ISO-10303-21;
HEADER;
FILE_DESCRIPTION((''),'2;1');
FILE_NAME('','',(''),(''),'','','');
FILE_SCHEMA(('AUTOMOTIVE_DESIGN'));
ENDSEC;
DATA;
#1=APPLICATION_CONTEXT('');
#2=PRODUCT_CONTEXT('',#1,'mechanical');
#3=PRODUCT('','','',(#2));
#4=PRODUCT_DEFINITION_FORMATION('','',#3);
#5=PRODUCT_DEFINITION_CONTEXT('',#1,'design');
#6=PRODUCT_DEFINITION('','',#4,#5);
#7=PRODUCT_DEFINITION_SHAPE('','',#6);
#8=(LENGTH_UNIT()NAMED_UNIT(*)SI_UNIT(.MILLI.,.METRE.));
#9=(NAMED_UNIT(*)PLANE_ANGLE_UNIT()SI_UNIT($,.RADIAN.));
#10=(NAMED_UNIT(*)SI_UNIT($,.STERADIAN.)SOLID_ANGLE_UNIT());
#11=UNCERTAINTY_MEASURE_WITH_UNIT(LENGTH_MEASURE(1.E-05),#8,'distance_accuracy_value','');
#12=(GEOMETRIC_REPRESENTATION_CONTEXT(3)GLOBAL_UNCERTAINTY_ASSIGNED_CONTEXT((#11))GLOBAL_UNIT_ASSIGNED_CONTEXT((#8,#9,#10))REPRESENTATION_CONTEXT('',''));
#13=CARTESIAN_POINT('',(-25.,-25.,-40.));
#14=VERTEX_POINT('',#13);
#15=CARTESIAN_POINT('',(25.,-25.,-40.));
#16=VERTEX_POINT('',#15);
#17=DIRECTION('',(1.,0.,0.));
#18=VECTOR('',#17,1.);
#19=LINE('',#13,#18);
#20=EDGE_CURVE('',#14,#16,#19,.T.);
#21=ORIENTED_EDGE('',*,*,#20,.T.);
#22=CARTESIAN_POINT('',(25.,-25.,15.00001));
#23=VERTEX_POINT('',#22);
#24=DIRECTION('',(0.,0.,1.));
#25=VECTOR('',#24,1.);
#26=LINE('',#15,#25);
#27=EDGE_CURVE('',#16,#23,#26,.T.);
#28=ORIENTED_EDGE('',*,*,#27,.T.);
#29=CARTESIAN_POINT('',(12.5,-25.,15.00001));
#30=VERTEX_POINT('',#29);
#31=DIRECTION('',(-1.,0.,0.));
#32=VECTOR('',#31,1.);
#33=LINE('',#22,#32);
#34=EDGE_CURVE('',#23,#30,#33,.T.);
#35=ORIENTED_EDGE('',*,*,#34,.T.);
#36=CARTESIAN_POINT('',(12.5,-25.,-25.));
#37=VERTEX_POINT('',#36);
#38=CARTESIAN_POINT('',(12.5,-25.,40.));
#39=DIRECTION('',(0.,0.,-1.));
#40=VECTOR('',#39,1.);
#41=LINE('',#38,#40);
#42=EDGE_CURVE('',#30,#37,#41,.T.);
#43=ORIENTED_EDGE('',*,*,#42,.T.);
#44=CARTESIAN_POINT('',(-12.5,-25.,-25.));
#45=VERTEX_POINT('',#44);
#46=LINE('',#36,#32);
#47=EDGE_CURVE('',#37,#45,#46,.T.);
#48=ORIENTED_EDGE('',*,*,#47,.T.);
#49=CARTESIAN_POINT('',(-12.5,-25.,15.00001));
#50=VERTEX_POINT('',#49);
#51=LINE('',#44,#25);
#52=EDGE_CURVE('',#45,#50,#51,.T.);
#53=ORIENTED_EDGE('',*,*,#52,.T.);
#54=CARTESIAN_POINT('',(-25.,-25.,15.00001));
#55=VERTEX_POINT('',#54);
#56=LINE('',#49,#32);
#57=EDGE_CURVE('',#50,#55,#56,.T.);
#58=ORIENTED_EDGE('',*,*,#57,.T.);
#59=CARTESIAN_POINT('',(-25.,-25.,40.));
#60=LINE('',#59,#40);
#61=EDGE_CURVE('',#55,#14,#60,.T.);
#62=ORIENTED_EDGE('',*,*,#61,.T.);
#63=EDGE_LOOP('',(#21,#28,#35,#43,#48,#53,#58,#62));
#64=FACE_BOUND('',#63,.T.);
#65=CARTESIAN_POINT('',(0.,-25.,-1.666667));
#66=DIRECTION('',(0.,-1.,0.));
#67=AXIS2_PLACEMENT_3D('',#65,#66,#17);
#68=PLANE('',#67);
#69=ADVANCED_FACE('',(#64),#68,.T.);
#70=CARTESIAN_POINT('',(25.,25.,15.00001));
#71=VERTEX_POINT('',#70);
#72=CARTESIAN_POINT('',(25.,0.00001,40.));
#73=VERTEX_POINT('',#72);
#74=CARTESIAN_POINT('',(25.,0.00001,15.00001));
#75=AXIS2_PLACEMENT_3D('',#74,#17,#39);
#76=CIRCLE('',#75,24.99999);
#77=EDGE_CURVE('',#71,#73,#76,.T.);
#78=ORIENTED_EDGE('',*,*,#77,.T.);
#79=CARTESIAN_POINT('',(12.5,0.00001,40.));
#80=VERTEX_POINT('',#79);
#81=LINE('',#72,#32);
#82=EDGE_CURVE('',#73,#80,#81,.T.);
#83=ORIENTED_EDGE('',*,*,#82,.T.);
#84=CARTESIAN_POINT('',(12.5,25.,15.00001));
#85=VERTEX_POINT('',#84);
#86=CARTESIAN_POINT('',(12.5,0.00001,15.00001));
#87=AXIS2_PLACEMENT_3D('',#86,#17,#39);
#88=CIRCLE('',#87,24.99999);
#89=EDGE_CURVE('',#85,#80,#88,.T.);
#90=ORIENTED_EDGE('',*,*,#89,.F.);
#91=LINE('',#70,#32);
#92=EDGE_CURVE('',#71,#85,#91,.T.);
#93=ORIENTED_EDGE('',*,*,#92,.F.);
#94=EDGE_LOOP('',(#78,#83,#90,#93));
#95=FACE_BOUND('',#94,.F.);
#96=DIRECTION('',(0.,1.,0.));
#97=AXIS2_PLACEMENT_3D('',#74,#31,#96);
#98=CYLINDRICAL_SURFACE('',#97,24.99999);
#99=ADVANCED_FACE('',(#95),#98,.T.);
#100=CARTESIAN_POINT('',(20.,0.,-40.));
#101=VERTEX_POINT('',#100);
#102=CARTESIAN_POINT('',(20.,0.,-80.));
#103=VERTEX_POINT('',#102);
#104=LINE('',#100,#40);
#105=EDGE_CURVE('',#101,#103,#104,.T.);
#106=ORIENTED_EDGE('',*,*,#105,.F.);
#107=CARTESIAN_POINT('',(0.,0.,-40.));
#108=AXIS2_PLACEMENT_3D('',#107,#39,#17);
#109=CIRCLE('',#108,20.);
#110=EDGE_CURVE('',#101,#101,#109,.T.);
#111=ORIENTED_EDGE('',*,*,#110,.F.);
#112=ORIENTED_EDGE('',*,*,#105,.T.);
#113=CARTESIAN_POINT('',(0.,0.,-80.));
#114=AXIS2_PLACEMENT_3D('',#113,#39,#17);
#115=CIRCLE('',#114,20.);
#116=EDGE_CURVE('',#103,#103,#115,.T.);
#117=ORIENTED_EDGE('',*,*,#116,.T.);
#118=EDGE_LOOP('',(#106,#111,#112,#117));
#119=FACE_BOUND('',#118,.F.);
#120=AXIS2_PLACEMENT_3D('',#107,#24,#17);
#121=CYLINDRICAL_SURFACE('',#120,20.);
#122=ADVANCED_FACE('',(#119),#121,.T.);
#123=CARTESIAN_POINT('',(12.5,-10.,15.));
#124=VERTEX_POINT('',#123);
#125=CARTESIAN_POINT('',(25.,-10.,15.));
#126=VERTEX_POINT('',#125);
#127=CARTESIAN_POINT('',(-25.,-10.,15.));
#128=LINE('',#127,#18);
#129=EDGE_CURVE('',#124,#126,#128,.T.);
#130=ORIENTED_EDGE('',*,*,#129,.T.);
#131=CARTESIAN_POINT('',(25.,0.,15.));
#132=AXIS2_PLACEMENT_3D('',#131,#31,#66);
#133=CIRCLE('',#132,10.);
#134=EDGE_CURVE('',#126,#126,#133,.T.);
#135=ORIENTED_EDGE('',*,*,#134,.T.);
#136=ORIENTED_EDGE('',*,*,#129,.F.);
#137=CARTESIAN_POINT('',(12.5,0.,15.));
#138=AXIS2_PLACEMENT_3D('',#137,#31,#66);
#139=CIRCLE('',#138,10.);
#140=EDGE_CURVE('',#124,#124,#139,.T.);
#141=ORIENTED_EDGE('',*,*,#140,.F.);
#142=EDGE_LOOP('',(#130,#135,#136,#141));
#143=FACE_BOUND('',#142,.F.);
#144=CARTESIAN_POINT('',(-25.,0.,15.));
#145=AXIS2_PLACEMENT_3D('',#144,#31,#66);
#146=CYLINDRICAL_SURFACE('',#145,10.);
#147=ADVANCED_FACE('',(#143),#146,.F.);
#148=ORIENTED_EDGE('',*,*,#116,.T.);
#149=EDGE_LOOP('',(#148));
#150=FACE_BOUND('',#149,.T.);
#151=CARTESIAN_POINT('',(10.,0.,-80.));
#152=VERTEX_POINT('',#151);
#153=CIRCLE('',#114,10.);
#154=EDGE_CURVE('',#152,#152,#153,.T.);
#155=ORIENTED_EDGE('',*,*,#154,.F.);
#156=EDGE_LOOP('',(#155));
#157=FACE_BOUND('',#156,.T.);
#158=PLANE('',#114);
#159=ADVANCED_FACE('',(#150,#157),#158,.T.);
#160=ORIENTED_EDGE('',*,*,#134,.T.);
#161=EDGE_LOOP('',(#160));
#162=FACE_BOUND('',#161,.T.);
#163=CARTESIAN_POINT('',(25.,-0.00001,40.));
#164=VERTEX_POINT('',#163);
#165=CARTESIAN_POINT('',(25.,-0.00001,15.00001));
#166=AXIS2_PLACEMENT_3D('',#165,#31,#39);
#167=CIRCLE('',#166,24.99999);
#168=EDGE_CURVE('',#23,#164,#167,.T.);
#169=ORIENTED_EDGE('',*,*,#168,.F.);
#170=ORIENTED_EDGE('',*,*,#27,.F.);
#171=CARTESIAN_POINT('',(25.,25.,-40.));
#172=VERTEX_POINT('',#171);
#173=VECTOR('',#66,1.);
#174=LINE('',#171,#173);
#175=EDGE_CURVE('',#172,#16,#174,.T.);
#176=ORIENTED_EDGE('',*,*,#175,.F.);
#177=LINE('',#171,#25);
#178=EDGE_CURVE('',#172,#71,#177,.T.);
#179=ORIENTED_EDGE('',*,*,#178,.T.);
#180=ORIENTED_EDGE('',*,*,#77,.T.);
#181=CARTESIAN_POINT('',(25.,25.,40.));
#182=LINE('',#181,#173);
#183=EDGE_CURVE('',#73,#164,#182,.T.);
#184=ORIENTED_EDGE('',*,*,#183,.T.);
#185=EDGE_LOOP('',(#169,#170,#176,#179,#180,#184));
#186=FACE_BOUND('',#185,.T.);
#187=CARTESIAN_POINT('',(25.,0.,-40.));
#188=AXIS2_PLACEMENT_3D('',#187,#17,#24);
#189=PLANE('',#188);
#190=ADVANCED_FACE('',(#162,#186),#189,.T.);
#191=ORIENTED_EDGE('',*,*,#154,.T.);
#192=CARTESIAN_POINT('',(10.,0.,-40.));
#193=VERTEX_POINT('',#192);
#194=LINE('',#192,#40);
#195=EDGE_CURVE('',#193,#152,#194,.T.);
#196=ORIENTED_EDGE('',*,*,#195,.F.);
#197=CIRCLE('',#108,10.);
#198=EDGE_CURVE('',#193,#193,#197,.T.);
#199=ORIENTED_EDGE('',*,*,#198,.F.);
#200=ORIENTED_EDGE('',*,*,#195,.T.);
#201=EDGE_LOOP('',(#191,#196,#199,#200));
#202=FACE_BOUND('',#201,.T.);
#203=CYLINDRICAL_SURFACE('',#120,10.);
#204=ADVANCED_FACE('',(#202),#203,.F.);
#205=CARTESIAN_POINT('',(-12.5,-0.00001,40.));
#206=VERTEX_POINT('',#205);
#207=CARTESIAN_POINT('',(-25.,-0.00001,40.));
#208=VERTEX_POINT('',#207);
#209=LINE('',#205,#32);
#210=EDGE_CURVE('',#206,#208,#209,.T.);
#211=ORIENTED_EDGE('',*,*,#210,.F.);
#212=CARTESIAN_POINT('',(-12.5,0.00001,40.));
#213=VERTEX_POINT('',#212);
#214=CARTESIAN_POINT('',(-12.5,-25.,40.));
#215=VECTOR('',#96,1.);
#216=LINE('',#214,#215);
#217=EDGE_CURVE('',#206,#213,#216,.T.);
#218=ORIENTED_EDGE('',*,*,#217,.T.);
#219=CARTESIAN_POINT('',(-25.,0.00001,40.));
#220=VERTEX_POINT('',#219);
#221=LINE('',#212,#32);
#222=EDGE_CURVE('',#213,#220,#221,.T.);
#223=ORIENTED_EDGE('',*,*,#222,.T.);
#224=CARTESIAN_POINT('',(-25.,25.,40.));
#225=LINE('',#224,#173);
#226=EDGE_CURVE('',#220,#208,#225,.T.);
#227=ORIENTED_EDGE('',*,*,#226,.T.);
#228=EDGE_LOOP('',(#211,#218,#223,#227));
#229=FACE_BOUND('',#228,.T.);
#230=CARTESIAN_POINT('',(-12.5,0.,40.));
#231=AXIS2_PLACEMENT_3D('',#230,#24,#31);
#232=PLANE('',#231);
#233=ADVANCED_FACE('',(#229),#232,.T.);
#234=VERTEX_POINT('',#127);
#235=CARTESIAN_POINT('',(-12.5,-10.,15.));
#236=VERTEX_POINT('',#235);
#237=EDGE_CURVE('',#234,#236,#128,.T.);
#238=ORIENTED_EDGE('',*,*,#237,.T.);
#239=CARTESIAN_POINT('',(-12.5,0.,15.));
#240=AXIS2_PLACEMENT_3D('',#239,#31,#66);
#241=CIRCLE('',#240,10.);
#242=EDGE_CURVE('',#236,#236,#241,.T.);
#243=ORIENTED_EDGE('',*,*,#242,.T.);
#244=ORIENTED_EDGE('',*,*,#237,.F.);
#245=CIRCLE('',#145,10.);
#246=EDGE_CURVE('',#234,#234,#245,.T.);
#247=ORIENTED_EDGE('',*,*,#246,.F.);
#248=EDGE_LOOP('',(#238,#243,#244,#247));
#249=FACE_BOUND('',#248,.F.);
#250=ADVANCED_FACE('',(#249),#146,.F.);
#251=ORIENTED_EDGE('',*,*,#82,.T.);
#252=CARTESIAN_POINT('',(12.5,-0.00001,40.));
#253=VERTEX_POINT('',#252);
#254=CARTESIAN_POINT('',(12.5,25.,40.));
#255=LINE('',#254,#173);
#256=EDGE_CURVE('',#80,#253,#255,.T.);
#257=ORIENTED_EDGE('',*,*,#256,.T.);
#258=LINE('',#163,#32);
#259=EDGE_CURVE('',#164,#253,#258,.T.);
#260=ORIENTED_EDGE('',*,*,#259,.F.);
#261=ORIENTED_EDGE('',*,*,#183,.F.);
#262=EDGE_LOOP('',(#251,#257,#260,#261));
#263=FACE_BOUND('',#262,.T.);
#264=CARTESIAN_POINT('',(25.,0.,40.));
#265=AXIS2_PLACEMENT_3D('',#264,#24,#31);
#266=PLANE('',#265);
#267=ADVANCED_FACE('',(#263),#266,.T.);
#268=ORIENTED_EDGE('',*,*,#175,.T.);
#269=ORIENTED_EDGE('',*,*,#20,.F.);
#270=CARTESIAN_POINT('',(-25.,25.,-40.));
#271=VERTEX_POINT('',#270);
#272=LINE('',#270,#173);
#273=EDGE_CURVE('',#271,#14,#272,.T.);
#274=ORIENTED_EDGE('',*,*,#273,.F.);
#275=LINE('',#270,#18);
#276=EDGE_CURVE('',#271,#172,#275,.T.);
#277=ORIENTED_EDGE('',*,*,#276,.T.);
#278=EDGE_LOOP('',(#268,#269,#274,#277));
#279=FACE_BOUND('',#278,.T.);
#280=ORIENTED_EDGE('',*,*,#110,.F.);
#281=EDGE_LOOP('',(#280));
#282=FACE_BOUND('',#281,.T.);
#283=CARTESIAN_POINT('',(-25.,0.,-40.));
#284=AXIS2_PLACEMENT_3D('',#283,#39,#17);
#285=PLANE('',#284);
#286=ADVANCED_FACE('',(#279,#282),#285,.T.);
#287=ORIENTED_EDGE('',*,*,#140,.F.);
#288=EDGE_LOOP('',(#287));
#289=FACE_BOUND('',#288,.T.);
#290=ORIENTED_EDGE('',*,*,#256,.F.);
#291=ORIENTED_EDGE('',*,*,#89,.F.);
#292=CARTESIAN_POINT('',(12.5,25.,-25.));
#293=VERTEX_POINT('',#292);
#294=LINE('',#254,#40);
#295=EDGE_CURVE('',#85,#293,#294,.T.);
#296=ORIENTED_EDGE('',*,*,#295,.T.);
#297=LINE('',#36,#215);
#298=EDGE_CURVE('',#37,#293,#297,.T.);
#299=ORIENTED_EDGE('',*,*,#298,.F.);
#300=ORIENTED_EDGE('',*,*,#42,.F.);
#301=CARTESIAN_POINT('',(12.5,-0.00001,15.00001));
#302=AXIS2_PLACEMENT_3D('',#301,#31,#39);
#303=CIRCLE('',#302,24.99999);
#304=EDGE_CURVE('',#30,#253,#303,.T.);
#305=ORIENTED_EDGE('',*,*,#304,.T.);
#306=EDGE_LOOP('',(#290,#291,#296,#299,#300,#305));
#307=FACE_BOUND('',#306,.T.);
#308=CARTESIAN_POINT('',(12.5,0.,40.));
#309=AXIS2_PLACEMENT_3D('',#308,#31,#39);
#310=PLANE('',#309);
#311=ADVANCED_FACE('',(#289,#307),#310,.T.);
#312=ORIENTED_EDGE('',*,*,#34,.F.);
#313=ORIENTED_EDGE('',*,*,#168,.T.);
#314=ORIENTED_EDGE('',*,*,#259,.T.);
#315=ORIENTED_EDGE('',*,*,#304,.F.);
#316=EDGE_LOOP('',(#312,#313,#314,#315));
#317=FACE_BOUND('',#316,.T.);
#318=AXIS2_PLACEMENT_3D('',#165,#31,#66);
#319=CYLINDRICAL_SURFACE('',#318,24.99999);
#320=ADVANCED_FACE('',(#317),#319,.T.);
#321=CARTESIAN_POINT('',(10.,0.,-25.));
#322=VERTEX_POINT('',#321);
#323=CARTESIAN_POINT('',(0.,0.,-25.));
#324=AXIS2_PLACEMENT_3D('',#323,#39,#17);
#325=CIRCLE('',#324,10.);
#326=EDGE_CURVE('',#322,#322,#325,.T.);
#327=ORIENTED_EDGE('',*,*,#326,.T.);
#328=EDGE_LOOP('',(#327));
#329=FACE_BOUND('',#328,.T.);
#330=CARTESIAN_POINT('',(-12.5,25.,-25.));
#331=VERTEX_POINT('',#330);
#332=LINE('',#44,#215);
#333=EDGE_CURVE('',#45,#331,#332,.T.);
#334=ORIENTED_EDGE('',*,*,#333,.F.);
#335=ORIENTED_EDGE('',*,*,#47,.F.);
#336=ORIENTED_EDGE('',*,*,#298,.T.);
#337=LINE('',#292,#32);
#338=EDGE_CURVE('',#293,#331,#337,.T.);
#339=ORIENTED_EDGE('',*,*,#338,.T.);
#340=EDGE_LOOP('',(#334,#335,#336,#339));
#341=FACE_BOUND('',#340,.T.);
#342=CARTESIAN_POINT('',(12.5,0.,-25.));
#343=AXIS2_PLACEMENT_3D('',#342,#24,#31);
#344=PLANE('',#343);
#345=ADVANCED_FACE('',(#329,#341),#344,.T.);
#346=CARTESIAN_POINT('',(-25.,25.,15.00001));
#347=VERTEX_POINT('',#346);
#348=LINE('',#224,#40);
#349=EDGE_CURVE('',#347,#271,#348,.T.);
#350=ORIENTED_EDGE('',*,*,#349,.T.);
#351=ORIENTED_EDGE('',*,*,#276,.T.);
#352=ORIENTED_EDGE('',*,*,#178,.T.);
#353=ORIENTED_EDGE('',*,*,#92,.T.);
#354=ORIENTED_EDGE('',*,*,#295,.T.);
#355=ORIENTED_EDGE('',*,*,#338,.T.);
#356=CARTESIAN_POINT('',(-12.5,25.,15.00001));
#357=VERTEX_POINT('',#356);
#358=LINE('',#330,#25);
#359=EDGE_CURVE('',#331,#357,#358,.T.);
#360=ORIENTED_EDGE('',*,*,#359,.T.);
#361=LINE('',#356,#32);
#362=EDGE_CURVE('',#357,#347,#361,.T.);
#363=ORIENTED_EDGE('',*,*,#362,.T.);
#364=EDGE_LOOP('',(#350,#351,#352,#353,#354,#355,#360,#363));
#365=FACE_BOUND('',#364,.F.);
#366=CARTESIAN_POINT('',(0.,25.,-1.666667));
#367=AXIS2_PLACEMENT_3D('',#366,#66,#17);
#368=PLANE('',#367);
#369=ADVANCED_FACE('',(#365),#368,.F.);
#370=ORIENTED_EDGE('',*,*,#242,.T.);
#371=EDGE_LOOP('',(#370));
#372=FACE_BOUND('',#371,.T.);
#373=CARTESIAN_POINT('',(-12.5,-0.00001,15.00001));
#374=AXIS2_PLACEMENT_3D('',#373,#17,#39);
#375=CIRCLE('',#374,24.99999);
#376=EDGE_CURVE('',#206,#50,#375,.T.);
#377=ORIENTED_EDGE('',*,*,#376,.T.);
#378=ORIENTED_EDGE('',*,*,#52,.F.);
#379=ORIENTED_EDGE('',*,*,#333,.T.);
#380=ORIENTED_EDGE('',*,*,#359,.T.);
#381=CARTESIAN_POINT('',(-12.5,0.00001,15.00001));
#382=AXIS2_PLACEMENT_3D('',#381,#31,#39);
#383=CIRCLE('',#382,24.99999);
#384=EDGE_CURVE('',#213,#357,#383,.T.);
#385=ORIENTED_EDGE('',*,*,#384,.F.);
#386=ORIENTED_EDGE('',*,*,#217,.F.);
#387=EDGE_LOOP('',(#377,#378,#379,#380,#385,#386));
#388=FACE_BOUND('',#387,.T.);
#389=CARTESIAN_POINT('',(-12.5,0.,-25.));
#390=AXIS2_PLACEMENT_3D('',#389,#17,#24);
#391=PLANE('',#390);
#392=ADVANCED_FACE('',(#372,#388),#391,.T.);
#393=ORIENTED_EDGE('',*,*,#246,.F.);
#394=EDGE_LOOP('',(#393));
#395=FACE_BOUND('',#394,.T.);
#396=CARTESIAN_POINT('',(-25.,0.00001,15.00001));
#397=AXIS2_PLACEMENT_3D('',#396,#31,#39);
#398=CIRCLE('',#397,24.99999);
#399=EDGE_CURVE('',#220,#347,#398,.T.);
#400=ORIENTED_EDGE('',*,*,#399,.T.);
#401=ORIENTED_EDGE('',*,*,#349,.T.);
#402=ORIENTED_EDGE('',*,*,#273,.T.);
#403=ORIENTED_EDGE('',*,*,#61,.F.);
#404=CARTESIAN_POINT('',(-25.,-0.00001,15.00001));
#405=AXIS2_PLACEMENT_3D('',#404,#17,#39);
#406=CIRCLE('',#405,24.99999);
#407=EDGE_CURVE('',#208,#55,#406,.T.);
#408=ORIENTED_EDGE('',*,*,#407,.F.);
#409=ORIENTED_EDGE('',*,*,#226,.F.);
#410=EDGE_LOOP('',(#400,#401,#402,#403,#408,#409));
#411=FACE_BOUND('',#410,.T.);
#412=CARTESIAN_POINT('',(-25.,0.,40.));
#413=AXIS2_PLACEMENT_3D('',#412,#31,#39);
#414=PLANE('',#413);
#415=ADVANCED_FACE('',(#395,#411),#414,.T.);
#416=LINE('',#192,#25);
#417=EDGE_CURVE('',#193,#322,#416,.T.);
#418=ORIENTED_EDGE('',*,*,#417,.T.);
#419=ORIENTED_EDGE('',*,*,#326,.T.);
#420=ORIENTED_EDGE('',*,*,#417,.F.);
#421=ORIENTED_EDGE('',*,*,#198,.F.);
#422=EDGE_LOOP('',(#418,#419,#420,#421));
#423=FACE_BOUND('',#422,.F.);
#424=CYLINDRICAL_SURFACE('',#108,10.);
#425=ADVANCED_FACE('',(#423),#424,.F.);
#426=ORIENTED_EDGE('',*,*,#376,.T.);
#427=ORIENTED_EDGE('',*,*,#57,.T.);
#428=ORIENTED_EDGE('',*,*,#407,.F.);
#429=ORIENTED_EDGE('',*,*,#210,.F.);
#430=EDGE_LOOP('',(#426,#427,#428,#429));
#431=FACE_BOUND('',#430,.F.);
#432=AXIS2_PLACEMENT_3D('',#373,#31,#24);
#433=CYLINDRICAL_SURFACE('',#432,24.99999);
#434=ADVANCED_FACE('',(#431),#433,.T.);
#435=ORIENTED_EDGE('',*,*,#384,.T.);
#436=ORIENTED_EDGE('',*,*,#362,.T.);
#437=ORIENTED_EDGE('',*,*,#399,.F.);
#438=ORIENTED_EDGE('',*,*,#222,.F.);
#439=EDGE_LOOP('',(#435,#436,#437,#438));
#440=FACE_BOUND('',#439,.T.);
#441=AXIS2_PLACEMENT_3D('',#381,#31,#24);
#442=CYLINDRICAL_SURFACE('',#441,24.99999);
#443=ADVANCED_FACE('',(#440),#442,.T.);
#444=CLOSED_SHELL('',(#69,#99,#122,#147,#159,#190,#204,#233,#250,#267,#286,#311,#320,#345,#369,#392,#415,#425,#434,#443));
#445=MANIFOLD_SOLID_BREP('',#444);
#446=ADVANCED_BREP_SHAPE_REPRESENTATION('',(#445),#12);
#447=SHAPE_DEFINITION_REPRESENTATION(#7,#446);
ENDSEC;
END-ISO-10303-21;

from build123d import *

# Parameters (mm, degrees)
F1_DEPTH = 25
F2_R     = 20
F2_R_2   = 10
F3_DEPTH = 40
F4_DEPTH = 15
F5_R     = 10
F6_DEPTH = 56.6
F7_R     = 24.99999


# Not quite as in the source:
# - a fillet or chamfer is up to 0.001 mm smaller than in the source, because OpenCascade refuses the exact size


with BuildPart() as f1:
    # F0 (on Front) → F1 (new body, symmetric)
    with BuildSketch(Plane.XZ):
        Polygon((-12.5, 40), (-25, 40), (-25, -40), (25, -40), (25, 40), (12.5, 40), (12.5, -25), (-12.5, -25), align=None)
    extrude(amount=F1_DEPTH, both=True)

    # F2 (on face) → F3 (join)
    with BuildSketch(Plane(origin=(0, 0, -40), x_dir=(1, 0, 0), z_dir=(0, 0, -1))):
        Circle(F2_R)
        Circle(F2_R_2, mode=Mode.SUBTRACT)
    extrude(amount=F3_DEPTH)

    # F2 (on face) → F4 (cut)
    with BuildSketch(Plane(origin=(0, 0, -40), x_dir=(1, 0, 0), z_dir=(0, 0, -1))):
        Circle(F2_R_2)
    extrude(amount=-F4_DEPTH, mode=Mode.SUBTRACT)

    # F5 (on face) → F6 (cut)
    with BuildSketch(Plane(origin=(-25, 0, 0), x_dir=(0, -1, 0), z_dir=(-1, 0, 0))):
        with Locations((0, 15)):
            Circle(F5_R)
    extrude(amount=-F6_DEPTH, mode=Mode.SUBTRACT)

    # F7 (radius 25 in the source; OpenCascade refuses exactly that, so slightly less here)
    f7_edges = [f1.edges().sort_by_distance(p)[0] for p in [
        (18.75, 25, 40),
        (18.75, -25, 40),
        (-18.75, 25, 40),
        (-18.75, -25, 40),
    ]]
    fillet(f7_edges, radius=F7_R)


solid = f1.part
